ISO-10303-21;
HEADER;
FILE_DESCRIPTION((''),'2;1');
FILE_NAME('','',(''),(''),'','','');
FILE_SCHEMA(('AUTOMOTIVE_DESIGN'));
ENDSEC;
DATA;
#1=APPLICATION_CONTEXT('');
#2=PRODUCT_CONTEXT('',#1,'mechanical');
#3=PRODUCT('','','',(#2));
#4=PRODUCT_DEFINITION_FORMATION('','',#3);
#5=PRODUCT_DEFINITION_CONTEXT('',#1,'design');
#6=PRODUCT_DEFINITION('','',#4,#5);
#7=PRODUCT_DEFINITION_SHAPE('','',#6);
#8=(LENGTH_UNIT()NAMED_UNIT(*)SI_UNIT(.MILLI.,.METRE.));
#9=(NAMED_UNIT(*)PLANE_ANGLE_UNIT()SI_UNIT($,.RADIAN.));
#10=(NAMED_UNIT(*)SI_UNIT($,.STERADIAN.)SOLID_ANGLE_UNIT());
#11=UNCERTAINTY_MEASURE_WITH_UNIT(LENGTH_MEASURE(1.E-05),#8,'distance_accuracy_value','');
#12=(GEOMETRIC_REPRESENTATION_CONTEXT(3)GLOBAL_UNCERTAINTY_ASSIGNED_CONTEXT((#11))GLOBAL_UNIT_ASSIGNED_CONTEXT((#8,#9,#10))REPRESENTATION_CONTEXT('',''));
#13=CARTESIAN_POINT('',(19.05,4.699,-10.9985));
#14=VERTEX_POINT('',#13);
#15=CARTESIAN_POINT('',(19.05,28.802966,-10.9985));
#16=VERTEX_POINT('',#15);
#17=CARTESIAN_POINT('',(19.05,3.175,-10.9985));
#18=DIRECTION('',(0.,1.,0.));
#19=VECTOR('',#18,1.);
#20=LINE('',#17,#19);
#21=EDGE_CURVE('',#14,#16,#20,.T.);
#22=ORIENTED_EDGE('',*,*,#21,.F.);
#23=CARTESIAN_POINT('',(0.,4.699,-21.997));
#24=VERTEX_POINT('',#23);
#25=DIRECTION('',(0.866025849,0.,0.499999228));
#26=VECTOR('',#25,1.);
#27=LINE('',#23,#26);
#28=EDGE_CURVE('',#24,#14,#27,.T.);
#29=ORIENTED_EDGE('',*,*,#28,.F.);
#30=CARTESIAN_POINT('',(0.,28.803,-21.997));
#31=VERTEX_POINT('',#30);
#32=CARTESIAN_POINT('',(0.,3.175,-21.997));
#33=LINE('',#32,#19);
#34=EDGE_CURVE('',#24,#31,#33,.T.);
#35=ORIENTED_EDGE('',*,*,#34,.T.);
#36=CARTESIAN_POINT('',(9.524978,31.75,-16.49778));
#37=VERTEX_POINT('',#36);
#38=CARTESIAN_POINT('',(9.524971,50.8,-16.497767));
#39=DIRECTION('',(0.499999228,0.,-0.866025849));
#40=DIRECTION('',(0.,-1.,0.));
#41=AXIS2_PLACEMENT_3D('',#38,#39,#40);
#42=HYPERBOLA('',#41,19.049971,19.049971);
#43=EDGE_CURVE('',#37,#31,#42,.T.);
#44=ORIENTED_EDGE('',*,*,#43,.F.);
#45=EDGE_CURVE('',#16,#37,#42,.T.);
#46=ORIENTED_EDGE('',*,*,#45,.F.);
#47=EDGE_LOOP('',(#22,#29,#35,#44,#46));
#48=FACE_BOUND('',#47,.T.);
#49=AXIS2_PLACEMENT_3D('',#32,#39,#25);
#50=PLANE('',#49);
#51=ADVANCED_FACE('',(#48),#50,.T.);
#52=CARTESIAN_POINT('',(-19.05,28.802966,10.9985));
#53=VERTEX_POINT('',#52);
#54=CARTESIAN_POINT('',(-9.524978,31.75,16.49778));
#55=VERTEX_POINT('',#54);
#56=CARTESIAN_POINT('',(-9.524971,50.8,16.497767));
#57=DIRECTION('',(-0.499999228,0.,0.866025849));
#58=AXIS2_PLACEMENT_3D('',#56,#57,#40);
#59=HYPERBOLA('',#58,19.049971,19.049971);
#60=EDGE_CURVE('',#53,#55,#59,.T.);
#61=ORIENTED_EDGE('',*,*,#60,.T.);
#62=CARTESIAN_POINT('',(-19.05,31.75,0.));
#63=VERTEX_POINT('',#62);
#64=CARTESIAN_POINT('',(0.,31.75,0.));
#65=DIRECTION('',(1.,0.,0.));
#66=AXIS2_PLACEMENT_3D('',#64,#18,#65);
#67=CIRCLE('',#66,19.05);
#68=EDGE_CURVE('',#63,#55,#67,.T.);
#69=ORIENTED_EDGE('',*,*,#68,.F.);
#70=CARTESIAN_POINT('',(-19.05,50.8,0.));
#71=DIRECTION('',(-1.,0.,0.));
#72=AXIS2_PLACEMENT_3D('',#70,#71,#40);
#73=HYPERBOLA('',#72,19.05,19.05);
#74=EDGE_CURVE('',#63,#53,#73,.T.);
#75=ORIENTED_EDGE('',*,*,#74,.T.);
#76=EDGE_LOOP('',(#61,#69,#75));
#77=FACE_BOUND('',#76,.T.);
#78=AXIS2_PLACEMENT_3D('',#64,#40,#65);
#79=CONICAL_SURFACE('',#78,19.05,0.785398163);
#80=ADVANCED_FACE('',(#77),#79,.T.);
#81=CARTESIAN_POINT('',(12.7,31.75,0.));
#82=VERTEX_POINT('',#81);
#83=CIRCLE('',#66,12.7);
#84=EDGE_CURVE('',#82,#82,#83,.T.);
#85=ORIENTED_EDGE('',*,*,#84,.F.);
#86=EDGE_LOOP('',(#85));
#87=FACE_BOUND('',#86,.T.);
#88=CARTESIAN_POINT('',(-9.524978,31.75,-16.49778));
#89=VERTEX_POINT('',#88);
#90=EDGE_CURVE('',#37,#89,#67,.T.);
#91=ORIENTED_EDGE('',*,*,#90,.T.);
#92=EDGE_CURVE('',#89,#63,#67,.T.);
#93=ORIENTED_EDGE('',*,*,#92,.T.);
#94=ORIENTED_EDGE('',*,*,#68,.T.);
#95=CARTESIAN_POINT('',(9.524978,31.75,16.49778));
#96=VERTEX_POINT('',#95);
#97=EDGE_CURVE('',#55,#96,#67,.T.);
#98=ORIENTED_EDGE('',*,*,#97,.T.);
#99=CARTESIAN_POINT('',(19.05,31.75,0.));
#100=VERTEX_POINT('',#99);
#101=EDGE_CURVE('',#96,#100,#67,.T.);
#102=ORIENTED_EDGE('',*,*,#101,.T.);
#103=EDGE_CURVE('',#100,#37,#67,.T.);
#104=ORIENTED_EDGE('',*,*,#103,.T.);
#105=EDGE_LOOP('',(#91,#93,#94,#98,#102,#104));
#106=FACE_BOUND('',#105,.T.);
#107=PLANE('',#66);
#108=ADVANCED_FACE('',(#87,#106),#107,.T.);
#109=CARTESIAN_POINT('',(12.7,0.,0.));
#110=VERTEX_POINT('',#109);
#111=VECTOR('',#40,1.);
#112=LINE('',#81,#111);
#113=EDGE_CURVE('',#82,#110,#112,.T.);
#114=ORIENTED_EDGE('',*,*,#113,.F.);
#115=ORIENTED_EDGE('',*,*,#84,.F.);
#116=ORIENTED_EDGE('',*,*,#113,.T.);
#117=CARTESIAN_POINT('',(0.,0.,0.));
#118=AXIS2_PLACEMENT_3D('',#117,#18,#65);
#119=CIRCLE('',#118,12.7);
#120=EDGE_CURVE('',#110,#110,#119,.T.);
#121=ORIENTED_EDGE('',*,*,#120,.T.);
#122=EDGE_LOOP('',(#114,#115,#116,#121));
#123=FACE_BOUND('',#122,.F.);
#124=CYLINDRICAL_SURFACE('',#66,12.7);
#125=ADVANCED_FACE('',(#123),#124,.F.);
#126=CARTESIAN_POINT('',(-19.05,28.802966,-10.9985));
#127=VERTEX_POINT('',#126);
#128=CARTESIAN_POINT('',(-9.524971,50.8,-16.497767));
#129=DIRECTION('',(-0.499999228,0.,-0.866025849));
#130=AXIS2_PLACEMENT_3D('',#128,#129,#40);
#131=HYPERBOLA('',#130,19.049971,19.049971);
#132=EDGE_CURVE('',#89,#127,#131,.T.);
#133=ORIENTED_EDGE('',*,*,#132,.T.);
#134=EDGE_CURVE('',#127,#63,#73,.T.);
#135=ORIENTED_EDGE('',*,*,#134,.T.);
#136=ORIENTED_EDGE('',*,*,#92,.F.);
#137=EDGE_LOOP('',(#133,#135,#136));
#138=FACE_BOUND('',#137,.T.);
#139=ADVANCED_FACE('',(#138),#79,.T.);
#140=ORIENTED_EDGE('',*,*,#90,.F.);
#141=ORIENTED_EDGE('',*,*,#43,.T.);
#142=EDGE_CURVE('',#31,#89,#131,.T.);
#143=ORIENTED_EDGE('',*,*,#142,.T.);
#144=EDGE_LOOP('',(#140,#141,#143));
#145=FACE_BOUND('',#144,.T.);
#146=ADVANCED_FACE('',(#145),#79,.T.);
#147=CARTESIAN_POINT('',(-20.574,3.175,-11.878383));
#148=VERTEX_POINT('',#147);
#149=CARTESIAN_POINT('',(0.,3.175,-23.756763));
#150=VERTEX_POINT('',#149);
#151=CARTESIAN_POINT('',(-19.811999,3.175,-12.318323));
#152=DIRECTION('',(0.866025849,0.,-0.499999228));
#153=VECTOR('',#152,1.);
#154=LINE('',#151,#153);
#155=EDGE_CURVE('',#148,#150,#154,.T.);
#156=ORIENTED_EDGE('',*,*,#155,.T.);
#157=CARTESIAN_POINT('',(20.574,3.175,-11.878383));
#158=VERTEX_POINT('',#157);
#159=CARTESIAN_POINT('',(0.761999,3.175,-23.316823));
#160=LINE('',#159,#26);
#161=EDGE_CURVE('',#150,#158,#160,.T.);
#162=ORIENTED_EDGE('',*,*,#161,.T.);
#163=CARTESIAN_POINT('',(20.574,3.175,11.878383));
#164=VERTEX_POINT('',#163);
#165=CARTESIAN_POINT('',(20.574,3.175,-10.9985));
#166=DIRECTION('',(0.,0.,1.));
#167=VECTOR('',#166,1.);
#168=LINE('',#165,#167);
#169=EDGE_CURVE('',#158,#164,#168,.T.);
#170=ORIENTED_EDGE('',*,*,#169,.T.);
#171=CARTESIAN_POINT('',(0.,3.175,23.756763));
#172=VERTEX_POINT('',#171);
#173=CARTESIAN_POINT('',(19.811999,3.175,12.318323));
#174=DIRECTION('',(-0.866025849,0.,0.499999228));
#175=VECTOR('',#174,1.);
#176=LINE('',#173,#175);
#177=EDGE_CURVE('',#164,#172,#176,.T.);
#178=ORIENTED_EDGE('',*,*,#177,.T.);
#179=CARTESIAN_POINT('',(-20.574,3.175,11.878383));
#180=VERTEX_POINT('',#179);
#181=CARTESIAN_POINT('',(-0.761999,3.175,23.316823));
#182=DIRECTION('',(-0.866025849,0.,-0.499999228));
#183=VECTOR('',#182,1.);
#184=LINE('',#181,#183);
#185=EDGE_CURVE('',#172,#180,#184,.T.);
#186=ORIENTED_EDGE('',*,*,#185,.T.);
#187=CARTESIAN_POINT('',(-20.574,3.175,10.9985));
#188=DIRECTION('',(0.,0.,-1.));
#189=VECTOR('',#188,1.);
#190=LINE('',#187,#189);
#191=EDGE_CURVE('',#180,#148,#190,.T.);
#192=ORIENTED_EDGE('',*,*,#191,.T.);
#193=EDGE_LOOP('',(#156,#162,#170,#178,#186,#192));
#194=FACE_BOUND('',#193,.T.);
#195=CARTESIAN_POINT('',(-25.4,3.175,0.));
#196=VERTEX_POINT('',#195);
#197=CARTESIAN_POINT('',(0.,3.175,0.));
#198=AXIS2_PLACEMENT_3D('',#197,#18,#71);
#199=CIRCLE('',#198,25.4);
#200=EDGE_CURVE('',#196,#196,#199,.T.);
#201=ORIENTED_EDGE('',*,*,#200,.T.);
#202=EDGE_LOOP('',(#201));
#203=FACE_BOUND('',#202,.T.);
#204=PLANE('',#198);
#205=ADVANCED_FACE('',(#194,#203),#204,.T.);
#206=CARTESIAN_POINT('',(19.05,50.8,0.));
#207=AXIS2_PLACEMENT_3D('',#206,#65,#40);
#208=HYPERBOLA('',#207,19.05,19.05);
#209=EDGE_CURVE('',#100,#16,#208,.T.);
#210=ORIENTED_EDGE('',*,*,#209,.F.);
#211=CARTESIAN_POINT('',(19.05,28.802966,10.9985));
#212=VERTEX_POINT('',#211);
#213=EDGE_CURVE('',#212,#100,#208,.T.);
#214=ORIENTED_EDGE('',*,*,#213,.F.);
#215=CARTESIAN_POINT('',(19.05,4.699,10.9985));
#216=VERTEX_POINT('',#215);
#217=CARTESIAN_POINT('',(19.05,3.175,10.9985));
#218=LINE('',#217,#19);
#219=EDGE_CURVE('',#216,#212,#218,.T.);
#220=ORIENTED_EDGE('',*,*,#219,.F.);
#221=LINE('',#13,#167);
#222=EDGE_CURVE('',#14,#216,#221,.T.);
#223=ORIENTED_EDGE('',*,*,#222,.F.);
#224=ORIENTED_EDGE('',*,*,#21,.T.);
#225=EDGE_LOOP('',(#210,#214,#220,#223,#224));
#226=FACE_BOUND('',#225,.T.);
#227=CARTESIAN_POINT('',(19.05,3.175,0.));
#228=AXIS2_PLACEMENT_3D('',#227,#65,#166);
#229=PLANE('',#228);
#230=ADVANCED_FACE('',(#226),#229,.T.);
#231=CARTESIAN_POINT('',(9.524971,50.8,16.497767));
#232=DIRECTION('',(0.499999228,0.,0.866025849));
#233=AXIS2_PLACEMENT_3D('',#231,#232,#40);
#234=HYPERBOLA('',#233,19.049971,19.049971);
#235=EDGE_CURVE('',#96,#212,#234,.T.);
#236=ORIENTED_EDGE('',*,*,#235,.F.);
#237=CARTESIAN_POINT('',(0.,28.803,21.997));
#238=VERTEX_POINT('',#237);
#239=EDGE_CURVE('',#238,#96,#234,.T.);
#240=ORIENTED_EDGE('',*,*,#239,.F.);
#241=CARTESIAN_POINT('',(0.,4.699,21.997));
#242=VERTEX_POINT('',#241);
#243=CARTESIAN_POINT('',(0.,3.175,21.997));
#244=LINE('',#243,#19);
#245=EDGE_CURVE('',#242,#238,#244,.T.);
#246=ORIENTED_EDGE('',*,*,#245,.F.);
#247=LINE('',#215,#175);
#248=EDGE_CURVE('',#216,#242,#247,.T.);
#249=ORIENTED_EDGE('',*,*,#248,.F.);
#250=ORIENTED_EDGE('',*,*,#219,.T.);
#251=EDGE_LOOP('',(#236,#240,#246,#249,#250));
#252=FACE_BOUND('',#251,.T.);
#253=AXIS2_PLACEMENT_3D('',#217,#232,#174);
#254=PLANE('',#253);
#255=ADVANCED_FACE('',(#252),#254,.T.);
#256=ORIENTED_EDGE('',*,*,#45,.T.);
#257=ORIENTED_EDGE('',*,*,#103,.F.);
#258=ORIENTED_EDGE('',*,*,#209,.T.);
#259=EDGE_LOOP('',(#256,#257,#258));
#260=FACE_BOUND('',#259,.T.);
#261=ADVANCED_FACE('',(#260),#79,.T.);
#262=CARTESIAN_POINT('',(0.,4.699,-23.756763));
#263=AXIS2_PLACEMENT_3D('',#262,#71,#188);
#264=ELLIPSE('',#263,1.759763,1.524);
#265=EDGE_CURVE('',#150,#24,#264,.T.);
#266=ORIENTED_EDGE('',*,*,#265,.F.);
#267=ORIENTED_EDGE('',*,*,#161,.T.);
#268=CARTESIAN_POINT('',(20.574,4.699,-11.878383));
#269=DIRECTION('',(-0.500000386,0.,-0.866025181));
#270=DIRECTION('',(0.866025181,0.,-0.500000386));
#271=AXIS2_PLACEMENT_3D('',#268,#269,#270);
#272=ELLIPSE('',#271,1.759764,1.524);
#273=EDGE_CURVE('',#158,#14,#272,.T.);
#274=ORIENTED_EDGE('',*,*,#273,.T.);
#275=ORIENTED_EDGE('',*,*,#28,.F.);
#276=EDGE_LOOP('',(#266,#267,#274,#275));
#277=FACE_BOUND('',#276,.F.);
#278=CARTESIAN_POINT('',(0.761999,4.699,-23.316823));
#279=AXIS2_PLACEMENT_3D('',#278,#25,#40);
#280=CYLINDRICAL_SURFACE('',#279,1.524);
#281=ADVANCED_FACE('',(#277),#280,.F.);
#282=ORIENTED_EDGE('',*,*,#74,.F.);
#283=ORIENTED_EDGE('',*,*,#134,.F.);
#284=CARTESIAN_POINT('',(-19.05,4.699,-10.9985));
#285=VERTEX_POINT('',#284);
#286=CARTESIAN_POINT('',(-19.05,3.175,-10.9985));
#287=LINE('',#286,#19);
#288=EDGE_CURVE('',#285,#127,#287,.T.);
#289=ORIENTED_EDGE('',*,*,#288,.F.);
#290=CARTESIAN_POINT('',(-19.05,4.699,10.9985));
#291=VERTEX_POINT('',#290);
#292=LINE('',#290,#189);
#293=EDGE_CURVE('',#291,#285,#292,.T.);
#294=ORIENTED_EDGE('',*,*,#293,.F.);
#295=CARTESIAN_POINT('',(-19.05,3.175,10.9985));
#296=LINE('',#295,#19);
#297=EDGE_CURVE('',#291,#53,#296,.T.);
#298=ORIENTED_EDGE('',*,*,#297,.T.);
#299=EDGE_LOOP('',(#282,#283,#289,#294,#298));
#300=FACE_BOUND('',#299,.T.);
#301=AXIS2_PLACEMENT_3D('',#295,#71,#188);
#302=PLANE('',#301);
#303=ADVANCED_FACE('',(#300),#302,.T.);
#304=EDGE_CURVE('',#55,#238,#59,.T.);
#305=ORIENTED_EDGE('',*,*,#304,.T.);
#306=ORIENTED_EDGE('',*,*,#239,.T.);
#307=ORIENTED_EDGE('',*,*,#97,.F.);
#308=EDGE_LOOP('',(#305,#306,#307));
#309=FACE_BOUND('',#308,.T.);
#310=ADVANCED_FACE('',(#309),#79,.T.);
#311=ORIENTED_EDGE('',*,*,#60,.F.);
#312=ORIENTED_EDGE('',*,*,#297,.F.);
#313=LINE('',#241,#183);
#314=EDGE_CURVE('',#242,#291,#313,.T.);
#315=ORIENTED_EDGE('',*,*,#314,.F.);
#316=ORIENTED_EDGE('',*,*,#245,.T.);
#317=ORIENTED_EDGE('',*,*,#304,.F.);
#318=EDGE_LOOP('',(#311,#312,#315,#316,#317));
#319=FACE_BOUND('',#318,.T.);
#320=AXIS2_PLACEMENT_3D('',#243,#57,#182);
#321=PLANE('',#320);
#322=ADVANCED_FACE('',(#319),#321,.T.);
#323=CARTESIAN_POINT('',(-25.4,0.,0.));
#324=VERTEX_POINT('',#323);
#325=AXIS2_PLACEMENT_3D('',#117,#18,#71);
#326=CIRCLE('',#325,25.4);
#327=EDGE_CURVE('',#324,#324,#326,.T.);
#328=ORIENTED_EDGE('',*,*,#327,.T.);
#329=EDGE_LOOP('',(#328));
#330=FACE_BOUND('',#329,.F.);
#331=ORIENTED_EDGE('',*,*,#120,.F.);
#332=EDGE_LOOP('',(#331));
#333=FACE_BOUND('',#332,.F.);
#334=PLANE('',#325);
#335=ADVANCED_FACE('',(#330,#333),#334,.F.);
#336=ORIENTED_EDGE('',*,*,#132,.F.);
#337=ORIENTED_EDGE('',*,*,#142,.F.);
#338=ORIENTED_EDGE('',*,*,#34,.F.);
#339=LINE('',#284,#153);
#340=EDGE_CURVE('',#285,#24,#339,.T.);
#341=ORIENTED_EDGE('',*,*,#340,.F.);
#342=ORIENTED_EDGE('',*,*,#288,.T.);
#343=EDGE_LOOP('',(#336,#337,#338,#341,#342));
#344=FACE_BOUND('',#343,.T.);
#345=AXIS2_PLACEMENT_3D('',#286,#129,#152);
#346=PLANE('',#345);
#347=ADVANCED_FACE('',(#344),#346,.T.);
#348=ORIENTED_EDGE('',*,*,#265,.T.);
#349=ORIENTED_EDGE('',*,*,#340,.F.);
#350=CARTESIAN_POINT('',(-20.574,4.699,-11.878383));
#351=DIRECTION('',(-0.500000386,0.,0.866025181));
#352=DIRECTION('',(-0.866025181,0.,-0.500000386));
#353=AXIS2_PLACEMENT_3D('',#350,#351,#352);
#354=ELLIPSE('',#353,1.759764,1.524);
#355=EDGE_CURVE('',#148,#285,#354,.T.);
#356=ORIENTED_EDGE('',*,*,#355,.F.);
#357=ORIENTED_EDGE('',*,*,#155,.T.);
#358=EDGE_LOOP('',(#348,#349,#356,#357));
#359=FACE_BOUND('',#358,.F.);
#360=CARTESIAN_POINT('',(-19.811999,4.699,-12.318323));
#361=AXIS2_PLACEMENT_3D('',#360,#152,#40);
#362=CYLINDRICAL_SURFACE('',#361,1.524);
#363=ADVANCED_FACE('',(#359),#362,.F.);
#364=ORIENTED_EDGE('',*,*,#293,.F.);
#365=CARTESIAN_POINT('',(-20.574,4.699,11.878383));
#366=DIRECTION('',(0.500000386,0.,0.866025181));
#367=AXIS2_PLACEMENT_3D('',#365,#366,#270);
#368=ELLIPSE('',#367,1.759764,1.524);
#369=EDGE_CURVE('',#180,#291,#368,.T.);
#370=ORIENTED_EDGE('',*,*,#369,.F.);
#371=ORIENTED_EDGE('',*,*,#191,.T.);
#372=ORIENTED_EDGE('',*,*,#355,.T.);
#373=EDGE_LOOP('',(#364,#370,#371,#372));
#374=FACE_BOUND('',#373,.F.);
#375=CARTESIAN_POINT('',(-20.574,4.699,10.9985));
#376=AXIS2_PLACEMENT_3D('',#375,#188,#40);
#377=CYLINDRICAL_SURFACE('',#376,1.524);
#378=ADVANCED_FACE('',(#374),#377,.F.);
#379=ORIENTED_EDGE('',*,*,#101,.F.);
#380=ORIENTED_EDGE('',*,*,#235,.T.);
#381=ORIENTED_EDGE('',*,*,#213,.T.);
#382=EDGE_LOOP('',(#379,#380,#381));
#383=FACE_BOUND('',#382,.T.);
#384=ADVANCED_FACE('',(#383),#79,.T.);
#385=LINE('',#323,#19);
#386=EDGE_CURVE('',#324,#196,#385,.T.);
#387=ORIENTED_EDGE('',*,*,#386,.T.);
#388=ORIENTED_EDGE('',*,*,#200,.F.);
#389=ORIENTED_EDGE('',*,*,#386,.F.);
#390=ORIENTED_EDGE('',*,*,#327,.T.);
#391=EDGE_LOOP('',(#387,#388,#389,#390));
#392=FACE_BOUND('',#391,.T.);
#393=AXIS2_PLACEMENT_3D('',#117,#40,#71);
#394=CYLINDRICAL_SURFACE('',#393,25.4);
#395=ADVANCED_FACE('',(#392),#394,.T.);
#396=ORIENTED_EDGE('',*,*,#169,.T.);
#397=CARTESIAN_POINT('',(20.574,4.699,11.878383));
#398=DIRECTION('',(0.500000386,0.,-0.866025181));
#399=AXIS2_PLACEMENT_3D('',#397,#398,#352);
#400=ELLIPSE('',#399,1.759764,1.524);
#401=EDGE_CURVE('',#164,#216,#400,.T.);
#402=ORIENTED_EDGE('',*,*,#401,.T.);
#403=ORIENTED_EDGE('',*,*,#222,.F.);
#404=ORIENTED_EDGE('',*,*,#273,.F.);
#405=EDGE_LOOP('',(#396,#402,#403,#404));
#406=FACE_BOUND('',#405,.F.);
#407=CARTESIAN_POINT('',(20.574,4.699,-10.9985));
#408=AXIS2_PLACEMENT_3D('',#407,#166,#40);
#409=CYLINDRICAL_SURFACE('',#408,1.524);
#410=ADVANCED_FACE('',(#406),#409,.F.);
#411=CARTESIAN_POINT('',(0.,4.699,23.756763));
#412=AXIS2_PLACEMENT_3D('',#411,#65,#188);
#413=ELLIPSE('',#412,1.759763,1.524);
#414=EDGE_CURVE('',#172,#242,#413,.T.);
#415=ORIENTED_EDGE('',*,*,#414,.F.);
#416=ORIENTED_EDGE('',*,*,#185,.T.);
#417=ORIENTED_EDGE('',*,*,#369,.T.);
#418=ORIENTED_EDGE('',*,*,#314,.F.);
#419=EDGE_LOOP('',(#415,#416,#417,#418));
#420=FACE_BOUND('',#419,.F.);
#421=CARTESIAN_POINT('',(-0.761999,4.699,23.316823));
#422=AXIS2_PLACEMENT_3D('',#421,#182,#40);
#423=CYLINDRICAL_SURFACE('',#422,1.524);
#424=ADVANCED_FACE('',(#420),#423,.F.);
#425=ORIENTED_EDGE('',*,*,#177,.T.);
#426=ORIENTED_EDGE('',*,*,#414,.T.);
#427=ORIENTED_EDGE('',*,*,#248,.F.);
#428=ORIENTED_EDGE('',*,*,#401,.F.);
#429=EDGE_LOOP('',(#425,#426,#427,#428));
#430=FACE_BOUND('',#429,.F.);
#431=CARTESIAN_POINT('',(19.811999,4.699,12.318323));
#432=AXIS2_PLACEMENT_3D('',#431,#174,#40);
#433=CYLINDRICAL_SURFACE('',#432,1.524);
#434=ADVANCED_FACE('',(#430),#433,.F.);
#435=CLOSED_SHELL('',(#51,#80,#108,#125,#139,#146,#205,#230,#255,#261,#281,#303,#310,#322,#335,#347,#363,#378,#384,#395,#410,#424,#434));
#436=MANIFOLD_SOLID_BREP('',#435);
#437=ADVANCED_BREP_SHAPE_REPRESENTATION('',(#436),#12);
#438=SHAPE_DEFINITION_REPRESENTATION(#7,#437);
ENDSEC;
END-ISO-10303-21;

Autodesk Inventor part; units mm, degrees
ref_plane "YZ Plane" through (0, 0, 0) normal (1, 0, 0) x (0, 1, 0)
ref_plane "XZ Plane" through (0, 0, 0) normal (0, 1, 0) x (-1, 0, 0)
ref_plane "XY Plane" through (0, 0, 0) normal (0, 0, 1) x (1, 0, 0)
sketch "Sketch1" plane through (0, 0, 0) normal (0, 1, 0) x (-1, 0, 0)
  circle A0 centre (0, 0) radius 25.4
  dimension "d0" = 50.8
extrude "Extrusion1" add sketch "Sketch1" along normal blind 3.175
sketch "Sketch2" plane through (0, 3.175, 0) normal (0, 1, 0) x (1, 0, 0)
  circle A0 centre (0, 0) radius 19.05
  line L0 (-19.05, -10.9985) -> (-19.05, 10.9985)
  line L1 (-19.05, 10.9985) -> (0, 21.997)
  line L2 (0, 21.997) -> (19.05, 10.9985)
  line L3 (19.05, 10.9985) -> (19.05, -10.9985)
  line L4 (19.05, -10.9985) -> (0, -21.997)
  line L5 (0, -21.997) -> (-19.05, -10.9985)
  point P0 (-9.525, -16.4978)
  dimension "d3" = 38.1
extrude "Extrusion2" add sketch "Sketch2" along normal blind 28.575
sketch "Sketch3" plane through (0, 31.75, 0) normal (0, 1, 0) x (1, 0, 0)
  circle A0 centre (0, 0) radius 12.7
  dimension "d7" = 25.4
extrude "Extrusion3" cut sketch "Sketch3" against normal through all
thread "Thread1" size "1-8 UNC" class "2B" standard "ANSI Unified Screw Threads" full length
sketch "Sketch6" plane through (0, 31.75, 0) normal (0, 1, 0) x (1, 0, 0)
  circle A0 centre (0, 0) radius 19.05
  line L0 (-19.05, -10.9985) -> (0, -21.997) projected
extrude "Extrusion5" cut sketch "Sketch6" against normal through all draft 45 keep common part
fillet "Fillet2" radius 1.524 6 edges at (-19.05, 3.175, 0) (-9.525, 3.175, 16.4978) (9.525, 3.175, 16.4978) (-9.525, 3.175, -16.4978) (9.525, 3.175, -16.4978) (19.05, 3.175, 0)
properties part number "13_17"
